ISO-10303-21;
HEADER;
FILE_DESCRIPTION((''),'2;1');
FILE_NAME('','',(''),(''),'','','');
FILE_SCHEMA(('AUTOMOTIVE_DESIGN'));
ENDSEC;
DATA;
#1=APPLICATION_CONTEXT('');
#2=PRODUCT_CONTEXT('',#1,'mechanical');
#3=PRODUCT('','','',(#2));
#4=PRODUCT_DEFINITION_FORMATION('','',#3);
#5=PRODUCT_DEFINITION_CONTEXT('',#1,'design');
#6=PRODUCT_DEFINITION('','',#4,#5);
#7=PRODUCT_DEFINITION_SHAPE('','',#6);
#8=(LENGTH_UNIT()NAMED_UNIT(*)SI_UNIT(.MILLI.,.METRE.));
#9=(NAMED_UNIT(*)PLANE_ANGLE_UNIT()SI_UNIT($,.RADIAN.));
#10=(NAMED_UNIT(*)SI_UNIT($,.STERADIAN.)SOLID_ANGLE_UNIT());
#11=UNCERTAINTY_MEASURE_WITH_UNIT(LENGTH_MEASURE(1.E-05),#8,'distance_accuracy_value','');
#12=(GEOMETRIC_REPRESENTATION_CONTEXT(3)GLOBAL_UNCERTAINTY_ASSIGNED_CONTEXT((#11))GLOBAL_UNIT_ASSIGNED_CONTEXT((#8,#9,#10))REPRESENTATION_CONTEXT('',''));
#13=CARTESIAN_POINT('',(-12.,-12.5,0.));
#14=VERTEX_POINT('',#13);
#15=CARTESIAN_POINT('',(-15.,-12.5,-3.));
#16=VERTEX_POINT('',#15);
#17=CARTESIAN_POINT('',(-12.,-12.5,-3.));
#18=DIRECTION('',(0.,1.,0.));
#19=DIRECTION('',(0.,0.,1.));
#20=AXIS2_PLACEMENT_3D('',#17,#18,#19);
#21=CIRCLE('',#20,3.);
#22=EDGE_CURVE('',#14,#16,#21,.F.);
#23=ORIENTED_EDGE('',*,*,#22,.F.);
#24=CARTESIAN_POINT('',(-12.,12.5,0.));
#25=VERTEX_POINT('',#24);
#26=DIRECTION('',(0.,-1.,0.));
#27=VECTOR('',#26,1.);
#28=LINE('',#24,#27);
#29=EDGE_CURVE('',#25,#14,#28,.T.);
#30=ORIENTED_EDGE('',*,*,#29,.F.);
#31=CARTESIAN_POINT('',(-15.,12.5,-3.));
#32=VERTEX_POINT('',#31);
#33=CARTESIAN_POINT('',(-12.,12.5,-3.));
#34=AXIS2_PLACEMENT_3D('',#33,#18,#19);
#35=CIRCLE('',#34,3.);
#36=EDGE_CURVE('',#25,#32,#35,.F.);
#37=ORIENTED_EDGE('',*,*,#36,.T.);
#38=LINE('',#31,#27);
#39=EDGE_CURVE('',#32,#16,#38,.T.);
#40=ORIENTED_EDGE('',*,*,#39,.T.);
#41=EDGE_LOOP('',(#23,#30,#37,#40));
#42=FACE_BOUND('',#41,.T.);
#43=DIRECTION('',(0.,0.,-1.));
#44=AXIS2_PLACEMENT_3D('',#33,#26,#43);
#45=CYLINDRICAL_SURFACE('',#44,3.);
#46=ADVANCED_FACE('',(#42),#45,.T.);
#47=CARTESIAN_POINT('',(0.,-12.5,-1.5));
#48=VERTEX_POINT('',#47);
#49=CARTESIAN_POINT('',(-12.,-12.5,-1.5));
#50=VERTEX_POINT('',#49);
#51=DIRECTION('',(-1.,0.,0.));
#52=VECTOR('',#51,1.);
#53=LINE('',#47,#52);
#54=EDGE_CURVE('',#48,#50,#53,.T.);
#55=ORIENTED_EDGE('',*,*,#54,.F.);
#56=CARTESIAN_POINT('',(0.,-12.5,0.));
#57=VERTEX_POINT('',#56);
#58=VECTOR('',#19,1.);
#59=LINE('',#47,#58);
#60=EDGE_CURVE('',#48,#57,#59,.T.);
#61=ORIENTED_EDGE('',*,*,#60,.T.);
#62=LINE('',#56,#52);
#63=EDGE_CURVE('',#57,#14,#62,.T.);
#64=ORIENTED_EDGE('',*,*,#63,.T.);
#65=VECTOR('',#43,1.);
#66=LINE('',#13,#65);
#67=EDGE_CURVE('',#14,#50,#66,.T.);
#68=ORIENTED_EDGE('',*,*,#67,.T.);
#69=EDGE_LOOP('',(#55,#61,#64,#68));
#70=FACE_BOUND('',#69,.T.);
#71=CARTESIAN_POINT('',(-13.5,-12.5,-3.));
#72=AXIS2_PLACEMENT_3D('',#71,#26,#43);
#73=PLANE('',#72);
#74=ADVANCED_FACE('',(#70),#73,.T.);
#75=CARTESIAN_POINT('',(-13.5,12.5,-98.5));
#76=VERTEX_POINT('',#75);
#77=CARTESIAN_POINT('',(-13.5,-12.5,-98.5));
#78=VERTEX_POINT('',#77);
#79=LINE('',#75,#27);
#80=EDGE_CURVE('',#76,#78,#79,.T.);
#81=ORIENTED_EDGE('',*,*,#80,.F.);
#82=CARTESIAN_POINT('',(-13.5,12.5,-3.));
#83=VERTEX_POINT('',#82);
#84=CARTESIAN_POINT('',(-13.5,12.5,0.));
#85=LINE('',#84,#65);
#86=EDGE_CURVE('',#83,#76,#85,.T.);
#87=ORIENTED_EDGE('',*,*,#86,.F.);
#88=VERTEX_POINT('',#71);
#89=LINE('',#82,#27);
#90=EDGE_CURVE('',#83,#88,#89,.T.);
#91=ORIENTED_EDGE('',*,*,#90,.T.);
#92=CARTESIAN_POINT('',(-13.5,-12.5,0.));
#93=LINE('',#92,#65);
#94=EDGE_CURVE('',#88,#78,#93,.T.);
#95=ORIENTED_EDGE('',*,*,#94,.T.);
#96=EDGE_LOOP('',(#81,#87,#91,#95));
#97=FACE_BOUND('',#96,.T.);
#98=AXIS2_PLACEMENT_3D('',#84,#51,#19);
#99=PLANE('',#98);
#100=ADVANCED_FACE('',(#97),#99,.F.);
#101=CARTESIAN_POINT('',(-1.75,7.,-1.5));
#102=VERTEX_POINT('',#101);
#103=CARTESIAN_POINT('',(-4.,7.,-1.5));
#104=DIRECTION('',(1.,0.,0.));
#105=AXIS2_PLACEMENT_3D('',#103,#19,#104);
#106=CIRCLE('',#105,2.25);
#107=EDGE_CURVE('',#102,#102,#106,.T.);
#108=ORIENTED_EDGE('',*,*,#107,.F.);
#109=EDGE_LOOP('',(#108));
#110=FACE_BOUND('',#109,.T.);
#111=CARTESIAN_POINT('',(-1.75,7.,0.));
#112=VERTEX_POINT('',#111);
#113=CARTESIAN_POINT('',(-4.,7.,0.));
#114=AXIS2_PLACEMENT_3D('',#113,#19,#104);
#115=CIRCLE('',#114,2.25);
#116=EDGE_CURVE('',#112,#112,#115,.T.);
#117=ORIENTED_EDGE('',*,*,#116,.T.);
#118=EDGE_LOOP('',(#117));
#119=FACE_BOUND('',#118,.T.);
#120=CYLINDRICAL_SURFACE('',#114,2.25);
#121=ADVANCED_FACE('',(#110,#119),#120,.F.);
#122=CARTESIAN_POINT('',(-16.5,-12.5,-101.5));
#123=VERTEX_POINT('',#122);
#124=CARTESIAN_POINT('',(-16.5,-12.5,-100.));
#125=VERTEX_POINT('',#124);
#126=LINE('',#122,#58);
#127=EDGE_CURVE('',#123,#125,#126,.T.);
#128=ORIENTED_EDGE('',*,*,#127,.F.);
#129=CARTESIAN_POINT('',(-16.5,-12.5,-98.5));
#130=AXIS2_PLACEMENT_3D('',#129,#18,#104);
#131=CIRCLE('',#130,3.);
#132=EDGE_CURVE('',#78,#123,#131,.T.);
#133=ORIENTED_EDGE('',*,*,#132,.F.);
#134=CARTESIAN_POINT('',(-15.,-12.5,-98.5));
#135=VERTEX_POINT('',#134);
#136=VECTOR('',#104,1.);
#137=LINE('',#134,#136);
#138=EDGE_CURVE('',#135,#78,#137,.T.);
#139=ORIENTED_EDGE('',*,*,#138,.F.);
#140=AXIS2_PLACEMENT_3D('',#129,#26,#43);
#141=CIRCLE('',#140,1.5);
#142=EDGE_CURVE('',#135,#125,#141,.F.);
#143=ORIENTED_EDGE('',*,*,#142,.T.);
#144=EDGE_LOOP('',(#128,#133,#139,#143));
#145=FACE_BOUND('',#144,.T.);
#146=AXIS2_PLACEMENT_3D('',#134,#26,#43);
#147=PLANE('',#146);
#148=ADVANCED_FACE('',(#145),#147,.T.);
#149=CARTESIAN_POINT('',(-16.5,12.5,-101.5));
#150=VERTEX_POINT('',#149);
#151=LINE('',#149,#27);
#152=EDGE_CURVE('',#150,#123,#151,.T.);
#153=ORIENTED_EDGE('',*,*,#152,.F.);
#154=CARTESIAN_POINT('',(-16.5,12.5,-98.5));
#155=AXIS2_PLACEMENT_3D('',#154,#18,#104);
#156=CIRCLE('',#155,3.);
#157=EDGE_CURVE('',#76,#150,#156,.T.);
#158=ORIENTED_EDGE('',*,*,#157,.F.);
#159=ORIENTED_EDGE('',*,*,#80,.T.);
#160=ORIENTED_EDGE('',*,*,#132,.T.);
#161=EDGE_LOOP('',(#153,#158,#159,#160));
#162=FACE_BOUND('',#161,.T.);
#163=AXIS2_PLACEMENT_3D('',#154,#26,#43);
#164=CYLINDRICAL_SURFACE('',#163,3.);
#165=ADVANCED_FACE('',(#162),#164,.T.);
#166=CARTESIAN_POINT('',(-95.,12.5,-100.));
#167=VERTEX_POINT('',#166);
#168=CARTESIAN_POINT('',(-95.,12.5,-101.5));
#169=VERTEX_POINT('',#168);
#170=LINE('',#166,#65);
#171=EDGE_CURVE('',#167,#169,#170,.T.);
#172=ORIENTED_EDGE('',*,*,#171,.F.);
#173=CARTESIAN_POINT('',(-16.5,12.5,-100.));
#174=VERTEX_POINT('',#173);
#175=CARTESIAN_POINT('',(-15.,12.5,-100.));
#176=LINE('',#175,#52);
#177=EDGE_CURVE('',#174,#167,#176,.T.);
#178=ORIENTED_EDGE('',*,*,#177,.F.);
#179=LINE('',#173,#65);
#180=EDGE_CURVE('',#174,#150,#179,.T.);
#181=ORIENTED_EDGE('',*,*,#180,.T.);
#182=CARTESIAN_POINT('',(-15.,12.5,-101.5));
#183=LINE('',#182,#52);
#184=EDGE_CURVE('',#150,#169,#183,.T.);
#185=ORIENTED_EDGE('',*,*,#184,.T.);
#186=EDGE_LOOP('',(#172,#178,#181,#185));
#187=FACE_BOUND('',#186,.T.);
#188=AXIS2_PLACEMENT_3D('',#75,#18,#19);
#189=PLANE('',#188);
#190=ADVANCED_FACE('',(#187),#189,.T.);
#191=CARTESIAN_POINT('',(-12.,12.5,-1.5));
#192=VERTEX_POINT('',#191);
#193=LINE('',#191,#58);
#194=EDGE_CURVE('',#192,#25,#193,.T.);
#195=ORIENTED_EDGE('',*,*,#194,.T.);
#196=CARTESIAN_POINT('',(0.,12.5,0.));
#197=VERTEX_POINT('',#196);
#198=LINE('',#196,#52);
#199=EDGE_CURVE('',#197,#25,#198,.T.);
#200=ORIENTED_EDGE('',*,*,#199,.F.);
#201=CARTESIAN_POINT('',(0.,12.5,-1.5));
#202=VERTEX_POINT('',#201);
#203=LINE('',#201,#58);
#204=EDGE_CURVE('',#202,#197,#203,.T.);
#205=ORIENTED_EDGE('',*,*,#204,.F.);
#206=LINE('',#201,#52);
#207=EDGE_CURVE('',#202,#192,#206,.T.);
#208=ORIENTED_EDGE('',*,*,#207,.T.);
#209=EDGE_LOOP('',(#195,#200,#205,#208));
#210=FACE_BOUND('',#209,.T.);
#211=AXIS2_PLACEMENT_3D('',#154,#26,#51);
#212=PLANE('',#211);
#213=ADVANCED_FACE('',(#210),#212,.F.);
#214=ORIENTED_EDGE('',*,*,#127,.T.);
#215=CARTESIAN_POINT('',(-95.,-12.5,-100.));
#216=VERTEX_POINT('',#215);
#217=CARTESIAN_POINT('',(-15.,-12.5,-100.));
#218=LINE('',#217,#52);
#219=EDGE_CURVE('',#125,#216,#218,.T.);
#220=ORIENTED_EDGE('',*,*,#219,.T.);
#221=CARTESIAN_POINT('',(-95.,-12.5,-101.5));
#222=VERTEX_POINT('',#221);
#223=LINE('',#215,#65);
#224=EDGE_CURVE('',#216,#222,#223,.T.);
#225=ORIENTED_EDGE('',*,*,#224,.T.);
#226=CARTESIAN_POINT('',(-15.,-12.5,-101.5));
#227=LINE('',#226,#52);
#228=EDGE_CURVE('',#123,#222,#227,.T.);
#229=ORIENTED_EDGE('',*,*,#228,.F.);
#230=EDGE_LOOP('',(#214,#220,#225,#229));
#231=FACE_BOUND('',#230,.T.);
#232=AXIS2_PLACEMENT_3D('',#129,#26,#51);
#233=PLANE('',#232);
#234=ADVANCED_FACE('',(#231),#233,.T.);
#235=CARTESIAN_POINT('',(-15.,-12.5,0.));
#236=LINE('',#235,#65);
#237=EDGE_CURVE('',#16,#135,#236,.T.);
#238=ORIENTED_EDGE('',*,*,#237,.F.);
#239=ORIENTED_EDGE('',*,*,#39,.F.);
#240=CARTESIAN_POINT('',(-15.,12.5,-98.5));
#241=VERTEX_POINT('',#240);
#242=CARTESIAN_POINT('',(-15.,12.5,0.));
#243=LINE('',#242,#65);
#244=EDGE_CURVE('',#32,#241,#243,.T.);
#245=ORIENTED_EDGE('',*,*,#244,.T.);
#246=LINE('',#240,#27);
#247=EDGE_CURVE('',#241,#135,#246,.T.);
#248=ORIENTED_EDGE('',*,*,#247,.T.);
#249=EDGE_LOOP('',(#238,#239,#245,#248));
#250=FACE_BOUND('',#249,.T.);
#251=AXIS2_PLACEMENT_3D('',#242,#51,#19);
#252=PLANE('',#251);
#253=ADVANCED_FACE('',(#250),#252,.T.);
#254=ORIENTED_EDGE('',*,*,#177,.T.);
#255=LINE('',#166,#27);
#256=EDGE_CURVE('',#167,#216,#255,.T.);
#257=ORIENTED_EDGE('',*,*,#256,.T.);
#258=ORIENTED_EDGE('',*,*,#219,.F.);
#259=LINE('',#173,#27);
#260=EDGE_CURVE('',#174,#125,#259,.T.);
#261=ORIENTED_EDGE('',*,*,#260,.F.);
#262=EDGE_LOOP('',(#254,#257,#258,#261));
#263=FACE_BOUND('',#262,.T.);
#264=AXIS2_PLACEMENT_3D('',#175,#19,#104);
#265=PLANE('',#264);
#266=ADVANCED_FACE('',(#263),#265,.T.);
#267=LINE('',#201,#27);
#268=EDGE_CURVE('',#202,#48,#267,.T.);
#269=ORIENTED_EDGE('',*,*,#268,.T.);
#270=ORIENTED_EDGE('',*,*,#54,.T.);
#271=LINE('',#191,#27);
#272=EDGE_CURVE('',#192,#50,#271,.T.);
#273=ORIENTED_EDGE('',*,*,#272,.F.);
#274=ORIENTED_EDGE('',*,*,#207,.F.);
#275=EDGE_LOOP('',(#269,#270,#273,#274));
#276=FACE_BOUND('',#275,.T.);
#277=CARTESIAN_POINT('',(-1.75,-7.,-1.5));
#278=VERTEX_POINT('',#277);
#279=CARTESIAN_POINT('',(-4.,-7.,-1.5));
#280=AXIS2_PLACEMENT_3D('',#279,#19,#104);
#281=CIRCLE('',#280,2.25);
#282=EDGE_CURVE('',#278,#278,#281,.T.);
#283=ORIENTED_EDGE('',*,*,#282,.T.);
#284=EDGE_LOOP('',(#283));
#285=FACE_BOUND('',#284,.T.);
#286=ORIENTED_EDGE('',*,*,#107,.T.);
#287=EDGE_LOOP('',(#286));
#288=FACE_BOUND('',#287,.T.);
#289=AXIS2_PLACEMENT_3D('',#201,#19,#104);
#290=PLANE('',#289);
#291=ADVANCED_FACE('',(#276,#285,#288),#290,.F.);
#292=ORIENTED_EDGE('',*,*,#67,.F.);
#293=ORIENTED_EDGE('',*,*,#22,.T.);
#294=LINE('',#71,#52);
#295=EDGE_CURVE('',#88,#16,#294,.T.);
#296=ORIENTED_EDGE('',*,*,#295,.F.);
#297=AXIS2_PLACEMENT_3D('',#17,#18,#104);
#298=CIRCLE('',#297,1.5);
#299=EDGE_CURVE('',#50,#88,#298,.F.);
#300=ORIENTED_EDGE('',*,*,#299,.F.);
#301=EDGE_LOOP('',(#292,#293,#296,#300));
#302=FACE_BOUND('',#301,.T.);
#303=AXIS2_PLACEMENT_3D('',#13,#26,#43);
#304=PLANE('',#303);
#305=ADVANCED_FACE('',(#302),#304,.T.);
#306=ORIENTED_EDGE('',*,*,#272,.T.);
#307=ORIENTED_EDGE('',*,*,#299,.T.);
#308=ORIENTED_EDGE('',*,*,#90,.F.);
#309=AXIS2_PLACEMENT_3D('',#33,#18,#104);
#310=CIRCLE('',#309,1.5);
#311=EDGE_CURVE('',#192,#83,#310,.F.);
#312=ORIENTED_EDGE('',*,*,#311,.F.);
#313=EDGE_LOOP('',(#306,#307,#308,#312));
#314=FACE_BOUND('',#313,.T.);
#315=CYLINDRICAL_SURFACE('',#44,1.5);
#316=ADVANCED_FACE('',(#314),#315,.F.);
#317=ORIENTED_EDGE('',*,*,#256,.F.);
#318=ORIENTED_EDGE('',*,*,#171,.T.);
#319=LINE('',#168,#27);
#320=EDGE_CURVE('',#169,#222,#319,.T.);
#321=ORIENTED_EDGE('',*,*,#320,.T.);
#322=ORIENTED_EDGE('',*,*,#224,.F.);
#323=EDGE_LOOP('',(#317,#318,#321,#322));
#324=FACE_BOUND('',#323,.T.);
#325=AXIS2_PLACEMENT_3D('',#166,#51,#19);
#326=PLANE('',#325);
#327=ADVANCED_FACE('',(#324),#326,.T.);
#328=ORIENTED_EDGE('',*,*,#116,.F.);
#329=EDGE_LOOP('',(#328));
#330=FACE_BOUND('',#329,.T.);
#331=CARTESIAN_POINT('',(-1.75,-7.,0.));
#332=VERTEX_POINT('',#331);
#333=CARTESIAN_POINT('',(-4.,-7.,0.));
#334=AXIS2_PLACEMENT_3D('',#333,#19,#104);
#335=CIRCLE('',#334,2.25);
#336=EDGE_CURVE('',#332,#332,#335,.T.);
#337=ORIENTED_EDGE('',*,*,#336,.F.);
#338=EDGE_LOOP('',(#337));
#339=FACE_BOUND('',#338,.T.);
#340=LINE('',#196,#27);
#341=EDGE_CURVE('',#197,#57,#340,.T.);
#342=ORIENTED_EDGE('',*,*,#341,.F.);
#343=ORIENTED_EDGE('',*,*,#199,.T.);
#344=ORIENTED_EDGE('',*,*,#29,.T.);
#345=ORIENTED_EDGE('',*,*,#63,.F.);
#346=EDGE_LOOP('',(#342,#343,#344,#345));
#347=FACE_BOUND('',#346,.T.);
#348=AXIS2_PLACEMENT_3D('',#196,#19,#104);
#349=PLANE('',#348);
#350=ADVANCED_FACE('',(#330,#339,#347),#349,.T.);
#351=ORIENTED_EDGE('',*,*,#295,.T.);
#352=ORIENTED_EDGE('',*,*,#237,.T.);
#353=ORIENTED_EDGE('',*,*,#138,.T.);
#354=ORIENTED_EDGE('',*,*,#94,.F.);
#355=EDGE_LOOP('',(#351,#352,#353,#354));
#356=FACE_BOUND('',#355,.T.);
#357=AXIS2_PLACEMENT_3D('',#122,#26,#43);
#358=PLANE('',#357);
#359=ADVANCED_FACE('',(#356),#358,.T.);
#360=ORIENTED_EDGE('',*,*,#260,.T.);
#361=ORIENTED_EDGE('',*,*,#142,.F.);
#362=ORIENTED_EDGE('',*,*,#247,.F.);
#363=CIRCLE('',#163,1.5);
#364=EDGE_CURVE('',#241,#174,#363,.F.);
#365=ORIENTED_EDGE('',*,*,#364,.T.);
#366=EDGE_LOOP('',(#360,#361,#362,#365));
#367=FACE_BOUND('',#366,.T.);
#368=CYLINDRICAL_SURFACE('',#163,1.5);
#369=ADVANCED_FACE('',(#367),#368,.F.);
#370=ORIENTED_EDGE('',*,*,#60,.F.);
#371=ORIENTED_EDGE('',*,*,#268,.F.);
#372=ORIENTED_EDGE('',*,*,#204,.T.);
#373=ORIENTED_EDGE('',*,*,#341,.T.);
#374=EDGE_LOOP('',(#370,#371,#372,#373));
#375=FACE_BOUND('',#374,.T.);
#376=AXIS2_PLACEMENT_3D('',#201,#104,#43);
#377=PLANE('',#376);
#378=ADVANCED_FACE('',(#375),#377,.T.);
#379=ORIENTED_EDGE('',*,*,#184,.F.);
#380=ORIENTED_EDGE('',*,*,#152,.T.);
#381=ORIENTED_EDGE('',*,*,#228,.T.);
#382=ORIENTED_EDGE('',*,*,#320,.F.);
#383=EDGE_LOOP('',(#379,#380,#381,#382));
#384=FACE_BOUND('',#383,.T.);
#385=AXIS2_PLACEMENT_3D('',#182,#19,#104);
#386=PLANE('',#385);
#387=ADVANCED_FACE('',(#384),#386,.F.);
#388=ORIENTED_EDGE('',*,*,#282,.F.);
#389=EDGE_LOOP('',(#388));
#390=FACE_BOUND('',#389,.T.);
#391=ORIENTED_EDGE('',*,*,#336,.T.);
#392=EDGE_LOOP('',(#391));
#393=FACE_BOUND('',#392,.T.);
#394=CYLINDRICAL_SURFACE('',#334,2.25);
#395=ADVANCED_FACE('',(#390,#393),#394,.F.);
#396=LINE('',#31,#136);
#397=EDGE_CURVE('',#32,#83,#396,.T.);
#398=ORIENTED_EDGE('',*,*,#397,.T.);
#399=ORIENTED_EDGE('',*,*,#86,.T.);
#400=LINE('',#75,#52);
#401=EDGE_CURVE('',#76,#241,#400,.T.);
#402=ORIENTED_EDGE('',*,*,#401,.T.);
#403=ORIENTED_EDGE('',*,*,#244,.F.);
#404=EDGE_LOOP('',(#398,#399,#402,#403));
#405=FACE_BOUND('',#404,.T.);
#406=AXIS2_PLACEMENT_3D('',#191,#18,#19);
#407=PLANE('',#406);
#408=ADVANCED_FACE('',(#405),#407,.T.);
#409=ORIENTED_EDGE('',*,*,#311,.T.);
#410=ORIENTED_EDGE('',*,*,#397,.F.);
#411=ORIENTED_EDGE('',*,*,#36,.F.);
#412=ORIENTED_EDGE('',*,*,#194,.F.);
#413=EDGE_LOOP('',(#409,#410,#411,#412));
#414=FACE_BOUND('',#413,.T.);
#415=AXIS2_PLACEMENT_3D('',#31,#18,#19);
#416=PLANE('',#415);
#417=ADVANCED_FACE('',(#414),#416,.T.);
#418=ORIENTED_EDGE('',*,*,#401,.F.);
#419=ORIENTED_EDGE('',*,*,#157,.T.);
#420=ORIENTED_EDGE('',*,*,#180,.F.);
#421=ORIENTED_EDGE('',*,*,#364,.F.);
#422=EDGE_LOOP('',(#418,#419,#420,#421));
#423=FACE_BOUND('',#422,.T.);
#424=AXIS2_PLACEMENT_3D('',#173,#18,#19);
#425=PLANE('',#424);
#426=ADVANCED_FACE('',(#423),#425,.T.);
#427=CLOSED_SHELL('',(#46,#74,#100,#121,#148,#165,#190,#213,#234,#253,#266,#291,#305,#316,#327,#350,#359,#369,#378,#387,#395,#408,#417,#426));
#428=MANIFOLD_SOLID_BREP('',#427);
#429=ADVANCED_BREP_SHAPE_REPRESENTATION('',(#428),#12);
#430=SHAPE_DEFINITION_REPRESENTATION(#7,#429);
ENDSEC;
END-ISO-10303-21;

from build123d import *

# Parameters (mm, degrees)
BASE_FLANGE1_DEPTH   = 12.5
M4_CLEARANCE_HOLE1_D = 4.5


# Sheet-metal steps are written as plain solids
with BuildPart() as part:
    # Sketch1 → Base-Flange1 (new, symmetric)
    with BuildSketch(Plane(origin=(0, 0, 0), x_dir=(1, 0, 0), z_dir=(0, 1, 0))):
        with BuildLine():
            Line((0, 0), (-12, 0))
            ThreePointArc((-12, 0), (-14.121320344, 0.878679656), (-15, 3))
            Line((-15, 3), (-15, 98.5))
            ThreePointArc((-15, 98.5), (-15.439339828, 99.560660172), (-16.5, 100))
            Line((-16.5, 100), (-95, 100))
            Line((-95, 100), (-95, 101.5))
            Line((-95, 101.5), (-16.5, 101.5))
            ThreePointArc((-16.5, 101.5), (-14.378679656, 100.621320344), (-13.5, 98.5))
            Line((-13.5, 98.5), (-13.5, 3))
            ThreePointArc((-13.5, 3), (-13.060660172, 1.939339828), (-12, 1.5))
            Line((-12, 1.5), (0, 1.5))
            Line((0, 1.5), (0, 0))
        make_face()
    extrude(amount=BASE_FLANGE1_DEPTH, both=True)

    # M4 Clearance Hole1 (through all)
    with Locations(Plane.XY):
        with Locations((-4, 7), (-4, -7)):
            Hole(M4_CLEARANCE_HOLE1_D / 2)


solid = part.part
